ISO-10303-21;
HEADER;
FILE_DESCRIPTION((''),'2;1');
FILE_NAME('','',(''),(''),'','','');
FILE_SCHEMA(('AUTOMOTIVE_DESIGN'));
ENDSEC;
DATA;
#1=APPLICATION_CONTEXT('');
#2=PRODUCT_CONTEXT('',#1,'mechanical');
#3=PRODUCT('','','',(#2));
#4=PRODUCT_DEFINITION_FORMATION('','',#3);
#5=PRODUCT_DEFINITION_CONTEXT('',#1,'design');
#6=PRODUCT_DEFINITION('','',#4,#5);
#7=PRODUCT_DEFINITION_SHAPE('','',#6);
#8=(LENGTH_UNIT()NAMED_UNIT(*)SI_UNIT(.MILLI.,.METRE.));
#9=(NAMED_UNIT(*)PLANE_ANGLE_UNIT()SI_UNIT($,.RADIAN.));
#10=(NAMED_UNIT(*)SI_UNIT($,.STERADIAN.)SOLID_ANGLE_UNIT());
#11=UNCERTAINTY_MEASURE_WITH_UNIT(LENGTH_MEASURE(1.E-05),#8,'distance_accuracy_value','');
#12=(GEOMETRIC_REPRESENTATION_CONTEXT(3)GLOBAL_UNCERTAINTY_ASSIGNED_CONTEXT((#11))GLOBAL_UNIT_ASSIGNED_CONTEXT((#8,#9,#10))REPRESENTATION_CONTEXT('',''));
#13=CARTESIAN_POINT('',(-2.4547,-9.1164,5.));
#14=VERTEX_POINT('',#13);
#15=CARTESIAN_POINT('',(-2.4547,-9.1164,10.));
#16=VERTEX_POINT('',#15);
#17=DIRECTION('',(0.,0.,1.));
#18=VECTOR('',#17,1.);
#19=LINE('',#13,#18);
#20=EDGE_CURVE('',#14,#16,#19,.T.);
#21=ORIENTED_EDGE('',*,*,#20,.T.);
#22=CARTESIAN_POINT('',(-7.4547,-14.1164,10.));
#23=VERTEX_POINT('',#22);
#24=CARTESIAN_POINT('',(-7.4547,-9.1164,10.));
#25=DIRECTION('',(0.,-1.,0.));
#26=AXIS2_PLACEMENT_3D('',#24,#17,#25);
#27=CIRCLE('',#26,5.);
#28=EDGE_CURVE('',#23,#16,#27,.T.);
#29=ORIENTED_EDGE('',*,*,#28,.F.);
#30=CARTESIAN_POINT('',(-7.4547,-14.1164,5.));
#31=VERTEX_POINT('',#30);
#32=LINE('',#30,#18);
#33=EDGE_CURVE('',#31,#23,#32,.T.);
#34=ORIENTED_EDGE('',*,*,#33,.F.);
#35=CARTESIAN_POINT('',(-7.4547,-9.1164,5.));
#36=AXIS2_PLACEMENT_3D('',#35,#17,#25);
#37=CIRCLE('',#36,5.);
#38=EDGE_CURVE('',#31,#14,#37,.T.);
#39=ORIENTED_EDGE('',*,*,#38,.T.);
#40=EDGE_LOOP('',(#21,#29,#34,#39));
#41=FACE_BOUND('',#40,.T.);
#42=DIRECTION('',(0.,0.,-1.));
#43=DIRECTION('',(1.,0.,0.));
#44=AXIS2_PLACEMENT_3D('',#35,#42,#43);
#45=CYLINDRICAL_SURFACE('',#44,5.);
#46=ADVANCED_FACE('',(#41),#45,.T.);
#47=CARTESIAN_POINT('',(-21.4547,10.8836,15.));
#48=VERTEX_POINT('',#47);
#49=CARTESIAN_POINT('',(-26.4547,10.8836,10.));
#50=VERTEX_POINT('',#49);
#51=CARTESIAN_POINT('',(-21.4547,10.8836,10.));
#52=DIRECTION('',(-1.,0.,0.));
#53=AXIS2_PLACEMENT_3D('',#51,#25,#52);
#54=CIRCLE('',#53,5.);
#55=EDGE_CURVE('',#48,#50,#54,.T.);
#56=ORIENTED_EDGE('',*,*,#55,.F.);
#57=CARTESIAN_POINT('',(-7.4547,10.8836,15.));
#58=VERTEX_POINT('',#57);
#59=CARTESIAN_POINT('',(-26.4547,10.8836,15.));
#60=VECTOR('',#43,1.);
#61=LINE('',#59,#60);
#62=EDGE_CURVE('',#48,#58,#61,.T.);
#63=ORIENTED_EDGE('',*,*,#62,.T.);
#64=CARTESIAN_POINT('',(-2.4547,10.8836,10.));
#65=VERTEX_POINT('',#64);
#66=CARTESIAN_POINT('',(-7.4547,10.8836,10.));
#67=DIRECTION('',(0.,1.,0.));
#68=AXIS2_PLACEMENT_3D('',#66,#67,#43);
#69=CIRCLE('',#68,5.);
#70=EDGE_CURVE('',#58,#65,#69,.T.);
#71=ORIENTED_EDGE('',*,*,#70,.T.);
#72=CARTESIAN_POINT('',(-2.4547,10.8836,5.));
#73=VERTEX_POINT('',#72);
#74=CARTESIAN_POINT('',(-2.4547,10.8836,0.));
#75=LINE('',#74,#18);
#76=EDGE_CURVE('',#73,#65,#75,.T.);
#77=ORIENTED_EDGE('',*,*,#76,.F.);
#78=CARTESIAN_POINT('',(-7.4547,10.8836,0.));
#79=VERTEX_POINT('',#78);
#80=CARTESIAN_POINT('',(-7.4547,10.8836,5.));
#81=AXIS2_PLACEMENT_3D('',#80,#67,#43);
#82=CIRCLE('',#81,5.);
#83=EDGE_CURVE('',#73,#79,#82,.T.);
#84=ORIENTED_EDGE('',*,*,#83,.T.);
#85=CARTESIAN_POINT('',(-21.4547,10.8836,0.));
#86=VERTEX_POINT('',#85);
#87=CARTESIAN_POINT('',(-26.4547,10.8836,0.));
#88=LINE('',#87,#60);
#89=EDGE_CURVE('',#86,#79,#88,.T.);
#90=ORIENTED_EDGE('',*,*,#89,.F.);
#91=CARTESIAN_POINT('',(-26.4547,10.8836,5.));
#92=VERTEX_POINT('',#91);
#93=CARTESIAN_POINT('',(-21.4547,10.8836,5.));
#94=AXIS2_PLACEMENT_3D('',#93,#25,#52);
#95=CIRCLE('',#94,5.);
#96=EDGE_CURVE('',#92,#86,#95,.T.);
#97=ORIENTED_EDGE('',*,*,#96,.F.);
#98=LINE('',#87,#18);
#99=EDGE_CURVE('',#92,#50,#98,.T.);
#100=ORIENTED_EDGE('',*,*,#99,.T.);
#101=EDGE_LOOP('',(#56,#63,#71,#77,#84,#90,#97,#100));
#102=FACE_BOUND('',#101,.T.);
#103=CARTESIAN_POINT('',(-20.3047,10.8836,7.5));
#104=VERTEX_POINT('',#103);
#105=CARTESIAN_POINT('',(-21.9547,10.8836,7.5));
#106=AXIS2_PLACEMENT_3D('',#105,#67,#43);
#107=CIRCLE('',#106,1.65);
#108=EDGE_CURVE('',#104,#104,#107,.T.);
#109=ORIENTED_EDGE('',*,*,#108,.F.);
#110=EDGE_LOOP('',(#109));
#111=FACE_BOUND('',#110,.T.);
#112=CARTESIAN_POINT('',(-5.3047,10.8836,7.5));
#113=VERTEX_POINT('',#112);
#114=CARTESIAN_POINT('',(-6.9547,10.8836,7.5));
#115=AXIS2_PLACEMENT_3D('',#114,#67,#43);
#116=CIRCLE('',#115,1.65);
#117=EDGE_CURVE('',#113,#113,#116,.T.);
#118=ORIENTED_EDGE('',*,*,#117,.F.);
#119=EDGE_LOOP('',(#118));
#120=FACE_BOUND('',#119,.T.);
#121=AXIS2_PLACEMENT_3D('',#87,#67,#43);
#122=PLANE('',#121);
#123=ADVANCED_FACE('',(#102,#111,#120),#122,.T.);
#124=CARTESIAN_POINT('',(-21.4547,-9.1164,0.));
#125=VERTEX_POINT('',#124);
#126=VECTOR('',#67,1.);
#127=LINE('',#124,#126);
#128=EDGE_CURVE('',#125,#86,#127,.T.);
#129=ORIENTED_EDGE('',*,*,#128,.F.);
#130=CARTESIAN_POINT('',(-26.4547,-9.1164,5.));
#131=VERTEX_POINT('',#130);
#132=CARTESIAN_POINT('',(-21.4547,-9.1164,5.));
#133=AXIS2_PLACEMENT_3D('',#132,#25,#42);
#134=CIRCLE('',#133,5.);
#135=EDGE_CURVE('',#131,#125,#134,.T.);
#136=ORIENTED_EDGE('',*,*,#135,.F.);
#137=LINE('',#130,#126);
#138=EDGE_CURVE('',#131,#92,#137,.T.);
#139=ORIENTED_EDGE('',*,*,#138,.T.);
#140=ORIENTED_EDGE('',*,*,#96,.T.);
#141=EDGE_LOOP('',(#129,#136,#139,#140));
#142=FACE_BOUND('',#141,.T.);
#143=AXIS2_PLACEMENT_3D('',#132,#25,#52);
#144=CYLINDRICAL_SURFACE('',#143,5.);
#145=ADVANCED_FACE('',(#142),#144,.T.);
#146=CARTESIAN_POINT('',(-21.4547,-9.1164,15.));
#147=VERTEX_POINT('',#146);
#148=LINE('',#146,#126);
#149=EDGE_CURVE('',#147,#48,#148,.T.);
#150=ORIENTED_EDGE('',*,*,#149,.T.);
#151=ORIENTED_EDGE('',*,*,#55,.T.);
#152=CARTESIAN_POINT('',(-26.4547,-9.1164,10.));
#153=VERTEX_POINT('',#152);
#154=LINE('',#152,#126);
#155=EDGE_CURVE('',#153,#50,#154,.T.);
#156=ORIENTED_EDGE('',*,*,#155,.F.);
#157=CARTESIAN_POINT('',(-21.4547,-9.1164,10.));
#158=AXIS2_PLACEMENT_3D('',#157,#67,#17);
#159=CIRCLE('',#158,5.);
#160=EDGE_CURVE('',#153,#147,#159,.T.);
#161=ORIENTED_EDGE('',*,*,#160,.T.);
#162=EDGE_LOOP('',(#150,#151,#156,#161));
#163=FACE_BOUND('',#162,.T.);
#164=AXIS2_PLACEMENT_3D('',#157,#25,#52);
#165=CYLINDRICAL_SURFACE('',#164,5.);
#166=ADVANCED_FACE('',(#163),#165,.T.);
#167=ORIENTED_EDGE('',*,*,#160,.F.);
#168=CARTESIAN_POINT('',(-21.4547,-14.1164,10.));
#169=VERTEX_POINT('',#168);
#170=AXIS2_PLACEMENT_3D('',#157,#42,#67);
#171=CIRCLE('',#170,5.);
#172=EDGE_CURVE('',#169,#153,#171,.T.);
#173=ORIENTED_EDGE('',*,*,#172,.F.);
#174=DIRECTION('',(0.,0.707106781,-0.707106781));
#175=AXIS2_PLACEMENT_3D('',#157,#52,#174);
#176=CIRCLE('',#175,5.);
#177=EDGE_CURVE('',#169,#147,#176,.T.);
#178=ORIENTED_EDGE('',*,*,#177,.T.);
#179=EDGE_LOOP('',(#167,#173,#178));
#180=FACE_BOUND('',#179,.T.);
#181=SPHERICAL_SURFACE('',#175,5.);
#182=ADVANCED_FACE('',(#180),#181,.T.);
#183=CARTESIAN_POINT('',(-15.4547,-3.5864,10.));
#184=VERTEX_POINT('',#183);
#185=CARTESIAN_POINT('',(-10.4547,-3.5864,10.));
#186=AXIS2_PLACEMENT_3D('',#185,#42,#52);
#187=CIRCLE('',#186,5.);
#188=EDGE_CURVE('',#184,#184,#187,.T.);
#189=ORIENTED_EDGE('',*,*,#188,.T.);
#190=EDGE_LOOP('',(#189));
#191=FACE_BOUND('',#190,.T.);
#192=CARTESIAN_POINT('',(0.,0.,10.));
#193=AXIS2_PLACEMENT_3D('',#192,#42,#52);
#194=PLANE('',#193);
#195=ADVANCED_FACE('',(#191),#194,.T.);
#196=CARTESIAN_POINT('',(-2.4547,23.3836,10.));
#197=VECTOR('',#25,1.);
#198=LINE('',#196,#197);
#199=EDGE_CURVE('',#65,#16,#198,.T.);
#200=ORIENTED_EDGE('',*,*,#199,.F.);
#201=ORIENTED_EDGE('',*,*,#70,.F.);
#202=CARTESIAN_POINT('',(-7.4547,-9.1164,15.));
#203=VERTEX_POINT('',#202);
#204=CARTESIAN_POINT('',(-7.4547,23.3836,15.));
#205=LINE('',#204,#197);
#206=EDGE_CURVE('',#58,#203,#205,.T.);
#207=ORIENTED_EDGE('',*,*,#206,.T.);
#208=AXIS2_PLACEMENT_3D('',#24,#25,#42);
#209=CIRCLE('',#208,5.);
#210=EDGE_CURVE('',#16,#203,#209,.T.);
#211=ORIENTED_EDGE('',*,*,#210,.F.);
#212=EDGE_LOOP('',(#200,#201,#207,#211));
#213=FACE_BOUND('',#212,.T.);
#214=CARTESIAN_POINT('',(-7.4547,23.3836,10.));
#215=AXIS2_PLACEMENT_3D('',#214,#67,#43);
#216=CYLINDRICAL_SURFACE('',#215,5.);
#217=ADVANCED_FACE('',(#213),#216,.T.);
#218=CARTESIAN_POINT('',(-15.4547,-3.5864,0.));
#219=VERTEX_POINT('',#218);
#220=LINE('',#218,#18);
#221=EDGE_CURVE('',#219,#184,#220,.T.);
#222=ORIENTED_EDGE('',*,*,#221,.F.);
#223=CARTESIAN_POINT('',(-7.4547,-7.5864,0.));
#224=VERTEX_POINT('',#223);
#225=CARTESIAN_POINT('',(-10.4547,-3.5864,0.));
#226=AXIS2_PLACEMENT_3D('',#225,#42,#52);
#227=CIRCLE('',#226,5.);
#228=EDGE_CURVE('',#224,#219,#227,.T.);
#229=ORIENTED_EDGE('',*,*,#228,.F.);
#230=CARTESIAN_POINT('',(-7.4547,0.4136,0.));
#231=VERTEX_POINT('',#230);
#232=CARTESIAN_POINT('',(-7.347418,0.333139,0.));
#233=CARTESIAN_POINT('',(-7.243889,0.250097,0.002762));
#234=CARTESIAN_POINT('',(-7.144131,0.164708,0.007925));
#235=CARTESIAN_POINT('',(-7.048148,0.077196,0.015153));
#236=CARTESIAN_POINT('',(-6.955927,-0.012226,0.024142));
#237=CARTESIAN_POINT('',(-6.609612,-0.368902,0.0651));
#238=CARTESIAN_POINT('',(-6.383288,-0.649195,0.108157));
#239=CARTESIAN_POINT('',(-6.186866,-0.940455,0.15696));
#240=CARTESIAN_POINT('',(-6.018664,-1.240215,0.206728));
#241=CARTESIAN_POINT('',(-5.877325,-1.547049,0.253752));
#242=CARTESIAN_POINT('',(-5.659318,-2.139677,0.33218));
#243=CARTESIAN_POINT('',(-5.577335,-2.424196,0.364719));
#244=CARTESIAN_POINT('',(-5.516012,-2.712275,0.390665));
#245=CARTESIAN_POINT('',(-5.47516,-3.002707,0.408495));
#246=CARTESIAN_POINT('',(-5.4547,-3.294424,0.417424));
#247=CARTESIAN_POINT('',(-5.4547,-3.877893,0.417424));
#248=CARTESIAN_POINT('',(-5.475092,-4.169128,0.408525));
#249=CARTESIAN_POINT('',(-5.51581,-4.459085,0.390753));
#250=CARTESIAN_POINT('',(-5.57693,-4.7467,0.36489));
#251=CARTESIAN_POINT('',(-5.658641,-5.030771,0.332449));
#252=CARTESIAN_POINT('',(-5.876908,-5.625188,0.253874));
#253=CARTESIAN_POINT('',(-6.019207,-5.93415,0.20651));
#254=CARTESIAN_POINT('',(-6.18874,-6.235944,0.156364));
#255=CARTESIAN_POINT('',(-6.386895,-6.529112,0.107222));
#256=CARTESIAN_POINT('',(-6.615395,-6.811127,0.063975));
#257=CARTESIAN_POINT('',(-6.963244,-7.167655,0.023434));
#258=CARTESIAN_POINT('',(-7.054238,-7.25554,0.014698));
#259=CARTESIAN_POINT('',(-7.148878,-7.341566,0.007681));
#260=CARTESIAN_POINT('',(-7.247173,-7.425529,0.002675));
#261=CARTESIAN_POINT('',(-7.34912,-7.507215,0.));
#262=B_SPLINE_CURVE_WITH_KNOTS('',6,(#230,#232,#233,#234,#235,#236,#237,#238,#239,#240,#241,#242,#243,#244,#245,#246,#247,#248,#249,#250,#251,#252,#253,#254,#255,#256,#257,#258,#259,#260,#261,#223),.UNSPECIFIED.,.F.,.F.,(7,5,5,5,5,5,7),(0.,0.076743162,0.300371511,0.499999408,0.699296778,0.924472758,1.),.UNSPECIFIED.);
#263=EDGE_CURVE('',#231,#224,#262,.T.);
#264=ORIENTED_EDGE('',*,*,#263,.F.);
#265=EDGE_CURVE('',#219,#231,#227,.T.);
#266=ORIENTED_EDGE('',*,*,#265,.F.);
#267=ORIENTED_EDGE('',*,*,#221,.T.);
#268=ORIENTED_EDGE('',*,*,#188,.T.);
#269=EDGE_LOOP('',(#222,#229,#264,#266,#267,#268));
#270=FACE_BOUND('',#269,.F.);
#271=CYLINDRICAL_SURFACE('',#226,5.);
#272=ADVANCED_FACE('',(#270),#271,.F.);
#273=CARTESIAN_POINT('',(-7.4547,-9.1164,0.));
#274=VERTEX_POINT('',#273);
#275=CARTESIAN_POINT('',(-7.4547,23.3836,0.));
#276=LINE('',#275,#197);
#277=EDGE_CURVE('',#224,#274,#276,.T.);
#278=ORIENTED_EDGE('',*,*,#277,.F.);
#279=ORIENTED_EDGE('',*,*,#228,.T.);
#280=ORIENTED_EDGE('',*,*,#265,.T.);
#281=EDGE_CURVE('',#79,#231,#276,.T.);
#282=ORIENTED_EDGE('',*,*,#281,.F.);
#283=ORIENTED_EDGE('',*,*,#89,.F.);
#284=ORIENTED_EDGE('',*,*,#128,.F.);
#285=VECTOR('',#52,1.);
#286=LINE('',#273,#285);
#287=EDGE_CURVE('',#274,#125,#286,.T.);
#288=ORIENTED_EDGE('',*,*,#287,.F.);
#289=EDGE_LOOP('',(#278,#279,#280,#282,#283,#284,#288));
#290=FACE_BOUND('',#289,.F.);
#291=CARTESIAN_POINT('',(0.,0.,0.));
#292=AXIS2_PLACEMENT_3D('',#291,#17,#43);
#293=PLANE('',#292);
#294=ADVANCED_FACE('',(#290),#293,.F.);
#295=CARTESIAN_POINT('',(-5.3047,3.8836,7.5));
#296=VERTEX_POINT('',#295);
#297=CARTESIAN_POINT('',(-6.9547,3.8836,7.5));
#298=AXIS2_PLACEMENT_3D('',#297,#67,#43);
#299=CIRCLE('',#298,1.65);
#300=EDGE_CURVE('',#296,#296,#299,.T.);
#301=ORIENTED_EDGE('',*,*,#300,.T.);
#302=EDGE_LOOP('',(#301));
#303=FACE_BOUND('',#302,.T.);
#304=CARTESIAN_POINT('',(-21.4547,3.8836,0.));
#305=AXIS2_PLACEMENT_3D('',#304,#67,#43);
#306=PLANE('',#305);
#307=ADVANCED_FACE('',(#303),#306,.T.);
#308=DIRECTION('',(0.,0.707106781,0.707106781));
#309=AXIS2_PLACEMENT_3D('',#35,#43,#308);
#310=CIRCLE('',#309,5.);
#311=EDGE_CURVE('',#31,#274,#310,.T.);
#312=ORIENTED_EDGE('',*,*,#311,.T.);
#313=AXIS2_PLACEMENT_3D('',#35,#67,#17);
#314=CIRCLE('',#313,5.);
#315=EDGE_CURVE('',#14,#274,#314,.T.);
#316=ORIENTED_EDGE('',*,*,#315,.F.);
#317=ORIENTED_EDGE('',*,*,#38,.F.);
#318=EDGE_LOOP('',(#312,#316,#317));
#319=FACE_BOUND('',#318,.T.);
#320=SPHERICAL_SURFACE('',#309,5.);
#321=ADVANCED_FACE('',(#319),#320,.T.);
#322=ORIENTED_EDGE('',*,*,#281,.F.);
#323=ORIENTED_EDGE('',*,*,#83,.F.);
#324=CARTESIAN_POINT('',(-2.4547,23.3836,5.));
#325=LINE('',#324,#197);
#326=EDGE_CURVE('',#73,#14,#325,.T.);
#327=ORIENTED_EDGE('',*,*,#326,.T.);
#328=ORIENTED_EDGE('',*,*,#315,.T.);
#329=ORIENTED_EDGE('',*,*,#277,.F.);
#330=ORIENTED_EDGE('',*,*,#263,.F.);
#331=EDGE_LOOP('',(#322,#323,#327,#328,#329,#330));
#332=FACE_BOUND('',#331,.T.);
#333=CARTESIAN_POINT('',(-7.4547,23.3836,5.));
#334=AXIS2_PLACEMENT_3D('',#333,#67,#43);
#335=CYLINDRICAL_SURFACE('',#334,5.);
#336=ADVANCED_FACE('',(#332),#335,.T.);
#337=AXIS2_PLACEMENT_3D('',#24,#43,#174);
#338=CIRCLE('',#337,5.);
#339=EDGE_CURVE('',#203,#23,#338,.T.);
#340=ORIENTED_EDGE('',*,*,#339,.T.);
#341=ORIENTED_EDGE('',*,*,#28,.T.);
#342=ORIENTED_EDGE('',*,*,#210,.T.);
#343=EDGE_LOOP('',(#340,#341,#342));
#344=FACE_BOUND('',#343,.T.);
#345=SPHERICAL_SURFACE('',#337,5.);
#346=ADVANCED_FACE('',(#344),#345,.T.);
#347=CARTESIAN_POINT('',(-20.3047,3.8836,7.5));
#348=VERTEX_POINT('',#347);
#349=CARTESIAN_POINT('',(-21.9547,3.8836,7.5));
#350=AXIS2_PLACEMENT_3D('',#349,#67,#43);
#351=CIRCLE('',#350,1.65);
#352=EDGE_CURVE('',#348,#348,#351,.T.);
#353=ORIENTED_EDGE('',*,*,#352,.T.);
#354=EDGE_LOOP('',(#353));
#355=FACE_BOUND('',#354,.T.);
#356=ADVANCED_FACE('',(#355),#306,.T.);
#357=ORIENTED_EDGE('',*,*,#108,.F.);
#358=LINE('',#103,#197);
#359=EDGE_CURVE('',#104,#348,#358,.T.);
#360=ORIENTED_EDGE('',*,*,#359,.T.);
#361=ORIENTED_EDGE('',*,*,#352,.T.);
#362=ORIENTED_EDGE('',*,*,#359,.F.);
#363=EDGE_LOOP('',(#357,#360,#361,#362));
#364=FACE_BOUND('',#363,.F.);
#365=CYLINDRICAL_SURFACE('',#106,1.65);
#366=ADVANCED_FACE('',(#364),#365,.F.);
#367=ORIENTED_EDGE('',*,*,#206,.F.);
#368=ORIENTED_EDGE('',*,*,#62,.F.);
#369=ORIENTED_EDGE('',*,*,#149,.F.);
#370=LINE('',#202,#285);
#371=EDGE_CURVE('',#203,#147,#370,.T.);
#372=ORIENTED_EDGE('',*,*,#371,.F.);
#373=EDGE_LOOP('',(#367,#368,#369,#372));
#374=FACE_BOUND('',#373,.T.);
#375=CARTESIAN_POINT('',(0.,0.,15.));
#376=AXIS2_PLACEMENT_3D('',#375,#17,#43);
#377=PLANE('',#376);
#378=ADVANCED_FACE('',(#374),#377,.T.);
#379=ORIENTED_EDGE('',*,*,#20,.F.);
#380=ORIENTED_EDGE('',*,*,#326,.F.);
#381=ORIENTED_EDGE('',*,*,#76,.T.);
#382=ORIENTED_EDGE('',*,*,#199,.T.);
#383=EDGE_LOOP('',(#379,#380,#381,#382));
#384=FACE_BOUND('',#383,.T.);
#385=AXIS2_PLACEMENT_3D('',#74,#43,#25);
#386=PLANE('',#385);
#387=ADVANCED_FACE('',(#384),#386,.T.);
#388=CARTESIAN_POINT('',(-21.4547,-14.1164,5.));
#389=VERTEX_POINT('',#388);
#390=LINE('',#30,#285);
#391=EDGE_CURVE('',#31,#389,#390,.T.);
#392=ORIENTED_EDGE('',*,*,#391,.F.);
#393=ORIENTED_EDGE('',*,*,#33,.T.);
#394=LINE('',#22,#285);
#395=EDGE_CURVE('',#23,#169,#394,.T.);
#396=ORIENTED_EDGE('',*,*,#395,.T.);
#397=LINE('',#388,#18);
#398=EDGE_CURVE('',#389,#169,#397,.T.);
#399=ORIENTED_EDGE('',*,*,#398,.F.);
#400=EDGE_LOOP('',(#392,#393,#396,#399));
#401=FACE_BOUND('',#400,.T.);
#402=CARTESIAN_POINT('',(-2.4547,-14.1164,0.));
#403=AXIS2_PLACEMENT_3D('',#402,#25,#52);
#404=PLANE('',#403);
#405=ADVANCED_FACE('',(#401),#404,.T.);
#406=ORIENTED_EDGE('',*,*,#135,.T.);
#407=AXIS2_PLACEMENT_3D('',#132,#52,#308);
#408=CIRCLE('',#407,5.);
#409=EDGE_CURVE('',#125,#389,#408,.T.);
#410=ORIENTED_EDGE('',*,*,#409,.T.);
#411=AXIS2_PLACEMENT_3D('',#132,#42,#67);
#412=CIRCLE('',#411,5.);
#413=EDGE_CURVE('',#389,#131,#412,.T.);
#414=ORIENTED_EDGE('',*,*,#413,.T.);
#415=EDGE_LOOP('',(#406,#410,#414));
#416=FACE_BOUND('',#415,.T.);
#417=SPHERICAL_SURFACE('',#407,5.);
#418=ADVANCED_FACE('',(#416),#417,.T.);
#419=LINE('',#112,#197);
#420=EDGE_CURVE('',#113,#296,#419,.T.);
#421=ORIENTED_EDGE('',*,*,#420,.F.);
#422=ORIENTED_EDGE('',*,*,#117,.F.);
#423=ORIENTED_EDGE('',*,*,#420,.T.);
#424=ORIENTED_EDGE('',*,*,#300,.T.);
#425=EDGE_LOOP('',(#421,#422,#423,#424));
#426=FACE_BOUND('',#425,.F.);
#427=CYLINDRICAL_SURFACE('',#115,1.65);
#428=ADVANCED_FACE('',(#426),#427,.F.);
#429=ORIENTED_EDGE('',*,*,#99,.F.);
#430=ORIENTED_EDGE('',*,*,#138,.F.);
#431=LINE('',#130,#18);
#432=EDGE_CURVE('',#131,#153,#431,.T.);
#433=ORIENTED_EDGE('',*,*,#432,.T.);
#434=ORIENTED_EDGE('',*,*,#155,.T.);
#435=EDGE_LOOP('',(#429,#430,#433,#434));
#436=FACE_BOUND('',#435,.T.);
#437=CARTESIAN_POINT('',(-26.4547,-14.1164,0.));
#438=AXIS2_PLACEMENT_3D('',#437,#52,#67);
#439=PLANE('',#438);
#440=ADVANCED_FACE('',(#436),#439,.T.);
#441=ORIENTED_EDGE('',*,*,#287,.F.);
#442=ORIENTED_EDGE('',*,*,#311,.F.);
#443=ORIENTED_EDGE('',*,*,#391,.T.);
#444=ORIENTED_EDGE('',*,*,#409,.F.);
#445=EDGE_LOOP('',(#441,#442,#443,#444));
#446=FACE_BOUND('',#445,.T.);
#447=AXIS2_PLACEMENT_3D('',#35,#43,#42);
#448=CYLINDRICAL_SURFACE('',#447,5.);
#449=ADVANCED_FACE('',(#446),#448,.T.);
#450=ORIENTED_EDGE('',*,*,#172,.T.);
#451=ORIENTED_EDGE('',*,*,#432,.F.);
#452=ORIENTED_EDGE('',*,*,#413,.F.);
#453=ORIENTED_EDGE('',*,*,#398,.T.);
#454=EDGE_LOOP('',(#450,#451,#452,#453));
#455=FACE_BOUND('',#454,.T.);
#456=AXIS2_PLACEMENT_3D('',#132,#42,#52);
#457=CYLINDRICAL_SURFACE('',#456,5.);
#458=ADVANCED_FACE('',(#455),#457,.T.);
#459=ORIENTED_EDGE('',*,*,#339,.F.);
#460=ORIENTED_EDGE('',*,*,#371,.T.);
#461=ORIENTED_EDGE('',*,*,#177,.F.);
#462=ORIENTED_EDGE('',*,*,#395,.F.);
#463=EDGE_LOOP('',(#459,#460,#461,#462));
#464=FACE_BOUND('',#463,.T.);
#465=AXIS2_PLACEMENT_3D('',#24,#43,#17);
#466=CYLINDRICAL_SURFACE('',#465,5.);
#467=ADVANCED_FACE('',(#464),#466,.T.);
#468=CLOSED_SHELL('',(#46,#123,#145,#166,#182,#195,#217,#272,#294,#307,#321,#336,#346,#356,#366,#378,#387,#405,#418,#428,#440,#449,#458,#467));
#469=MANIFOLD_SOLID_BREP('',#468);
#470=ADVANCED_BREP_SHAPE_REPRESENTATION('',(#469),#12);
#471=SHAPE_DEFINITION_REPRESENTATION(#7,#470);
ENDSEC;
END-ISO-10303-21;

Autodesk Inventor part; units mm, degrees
ref_plane "YZ Plane" through (0, 0, 0) normal (1, 0, 0) x (0, 1, 0)
ref_plane "XZ Plane" through (0, 0, 0) normal (0, 1, 0) x (-1, 0, 0)
ref_plane "XY Plane" through (0, 0, 0) normal (0, 0, 1) x (1, 0, 0)
sketch "スケッチ1" plane through (0, 0, 0) normal (0, 0, 1) x (1, 0, 0)
  line L0 (-26.4547, 10.8836) -> (-2.4547, 10.8836)
  line L1 (-2.4547, 10.8836) -> (-2.4547, -14.1164)
  line L2 (-2.4547, -14.1164) -> (-26.4547, -14.1164)
  line L3 (-26.4547, -14.1164) -> (-26.4547, 10.8836)
  point P0 (0, 0)
  dimension "d0" = 25
  dimension "d1" = 24
extrude "押し出し1" add sketch "スケッチ1" along normal blind 15
sketch "スケッチ3" plane through (0, 0, 0) normal (0, 0, -1) x (-1, 0, 0)
  circle A0 centre (10.4547, -3.5864) radius 5
  line L0 (26.4547, 10.8836) -> (2.4547, 10.8836) projected
  line L1 (2.4547, 10.8836) -> (2.4547, -14.1164) projected
  point P0 (0, 0)
  dimension "d7" = 10
  dimension "d8" = 14.47
  dimension "d9" = 8
extrude "押し出し2" cut sketch "スケッチ3" against normal blind 10
fillet "フィレット1" radius 5 8 edges at (-2.4547, -14.1164, 7.5) (-14.4547, -14.1164, 15) (-14.4547, -14.1164, 0) (-26.4547, -1.6164, 15) (-26.4547, -14.1164, 7.5) (-26.4547, -1.6164, 0) (-2.4547, -1.6164, 15) (-2.4547, -1.6164, 0)
sketch "スケッチ4" plane through (-21.4547, 10.8836, 0) normal (0, 1, 0) x (1, 0, 0)
  arc A0 (19, -5) -> (14, 0) centre (14, -5) ccw projected
  line L0 (0, 0) -> (14, 0) projected
  arc A1 (0, 0) -> (-5, -5) centre (0, -5) ccw projected
  line L1 (-5, -5) -> (-5, -10) projected
  arc A2 (-5, -10) -> (0, -15) centre (0, -10) ccw projected
  line L2 (14, -15) -> (0, -15) projected
  arc A3 (14, -15) -> (19, -10) centre (14, -10) ccw projected
  line L3 (19, -5) -> (19, -10) projected
  circle A4 centre (14.5, -7.5) radius 1.65
  circle A5 centre (-0.5, -7.5) radius 1.65
  point P0 (21.4547, 0)
  dimension "d13" = 3.3
  dimension "d14" = 4.5
  dimension "d15" = 7.5
  dimension "d22" = 15
  dimension "d23" = 3.3
  dimension "d24" = 7.5
extrude "押し出し3" cut sketch "スケッチ4" against normal blind 7 contours A4 | A5
properties part number "door_parts" material "PAEK 樹脂"
